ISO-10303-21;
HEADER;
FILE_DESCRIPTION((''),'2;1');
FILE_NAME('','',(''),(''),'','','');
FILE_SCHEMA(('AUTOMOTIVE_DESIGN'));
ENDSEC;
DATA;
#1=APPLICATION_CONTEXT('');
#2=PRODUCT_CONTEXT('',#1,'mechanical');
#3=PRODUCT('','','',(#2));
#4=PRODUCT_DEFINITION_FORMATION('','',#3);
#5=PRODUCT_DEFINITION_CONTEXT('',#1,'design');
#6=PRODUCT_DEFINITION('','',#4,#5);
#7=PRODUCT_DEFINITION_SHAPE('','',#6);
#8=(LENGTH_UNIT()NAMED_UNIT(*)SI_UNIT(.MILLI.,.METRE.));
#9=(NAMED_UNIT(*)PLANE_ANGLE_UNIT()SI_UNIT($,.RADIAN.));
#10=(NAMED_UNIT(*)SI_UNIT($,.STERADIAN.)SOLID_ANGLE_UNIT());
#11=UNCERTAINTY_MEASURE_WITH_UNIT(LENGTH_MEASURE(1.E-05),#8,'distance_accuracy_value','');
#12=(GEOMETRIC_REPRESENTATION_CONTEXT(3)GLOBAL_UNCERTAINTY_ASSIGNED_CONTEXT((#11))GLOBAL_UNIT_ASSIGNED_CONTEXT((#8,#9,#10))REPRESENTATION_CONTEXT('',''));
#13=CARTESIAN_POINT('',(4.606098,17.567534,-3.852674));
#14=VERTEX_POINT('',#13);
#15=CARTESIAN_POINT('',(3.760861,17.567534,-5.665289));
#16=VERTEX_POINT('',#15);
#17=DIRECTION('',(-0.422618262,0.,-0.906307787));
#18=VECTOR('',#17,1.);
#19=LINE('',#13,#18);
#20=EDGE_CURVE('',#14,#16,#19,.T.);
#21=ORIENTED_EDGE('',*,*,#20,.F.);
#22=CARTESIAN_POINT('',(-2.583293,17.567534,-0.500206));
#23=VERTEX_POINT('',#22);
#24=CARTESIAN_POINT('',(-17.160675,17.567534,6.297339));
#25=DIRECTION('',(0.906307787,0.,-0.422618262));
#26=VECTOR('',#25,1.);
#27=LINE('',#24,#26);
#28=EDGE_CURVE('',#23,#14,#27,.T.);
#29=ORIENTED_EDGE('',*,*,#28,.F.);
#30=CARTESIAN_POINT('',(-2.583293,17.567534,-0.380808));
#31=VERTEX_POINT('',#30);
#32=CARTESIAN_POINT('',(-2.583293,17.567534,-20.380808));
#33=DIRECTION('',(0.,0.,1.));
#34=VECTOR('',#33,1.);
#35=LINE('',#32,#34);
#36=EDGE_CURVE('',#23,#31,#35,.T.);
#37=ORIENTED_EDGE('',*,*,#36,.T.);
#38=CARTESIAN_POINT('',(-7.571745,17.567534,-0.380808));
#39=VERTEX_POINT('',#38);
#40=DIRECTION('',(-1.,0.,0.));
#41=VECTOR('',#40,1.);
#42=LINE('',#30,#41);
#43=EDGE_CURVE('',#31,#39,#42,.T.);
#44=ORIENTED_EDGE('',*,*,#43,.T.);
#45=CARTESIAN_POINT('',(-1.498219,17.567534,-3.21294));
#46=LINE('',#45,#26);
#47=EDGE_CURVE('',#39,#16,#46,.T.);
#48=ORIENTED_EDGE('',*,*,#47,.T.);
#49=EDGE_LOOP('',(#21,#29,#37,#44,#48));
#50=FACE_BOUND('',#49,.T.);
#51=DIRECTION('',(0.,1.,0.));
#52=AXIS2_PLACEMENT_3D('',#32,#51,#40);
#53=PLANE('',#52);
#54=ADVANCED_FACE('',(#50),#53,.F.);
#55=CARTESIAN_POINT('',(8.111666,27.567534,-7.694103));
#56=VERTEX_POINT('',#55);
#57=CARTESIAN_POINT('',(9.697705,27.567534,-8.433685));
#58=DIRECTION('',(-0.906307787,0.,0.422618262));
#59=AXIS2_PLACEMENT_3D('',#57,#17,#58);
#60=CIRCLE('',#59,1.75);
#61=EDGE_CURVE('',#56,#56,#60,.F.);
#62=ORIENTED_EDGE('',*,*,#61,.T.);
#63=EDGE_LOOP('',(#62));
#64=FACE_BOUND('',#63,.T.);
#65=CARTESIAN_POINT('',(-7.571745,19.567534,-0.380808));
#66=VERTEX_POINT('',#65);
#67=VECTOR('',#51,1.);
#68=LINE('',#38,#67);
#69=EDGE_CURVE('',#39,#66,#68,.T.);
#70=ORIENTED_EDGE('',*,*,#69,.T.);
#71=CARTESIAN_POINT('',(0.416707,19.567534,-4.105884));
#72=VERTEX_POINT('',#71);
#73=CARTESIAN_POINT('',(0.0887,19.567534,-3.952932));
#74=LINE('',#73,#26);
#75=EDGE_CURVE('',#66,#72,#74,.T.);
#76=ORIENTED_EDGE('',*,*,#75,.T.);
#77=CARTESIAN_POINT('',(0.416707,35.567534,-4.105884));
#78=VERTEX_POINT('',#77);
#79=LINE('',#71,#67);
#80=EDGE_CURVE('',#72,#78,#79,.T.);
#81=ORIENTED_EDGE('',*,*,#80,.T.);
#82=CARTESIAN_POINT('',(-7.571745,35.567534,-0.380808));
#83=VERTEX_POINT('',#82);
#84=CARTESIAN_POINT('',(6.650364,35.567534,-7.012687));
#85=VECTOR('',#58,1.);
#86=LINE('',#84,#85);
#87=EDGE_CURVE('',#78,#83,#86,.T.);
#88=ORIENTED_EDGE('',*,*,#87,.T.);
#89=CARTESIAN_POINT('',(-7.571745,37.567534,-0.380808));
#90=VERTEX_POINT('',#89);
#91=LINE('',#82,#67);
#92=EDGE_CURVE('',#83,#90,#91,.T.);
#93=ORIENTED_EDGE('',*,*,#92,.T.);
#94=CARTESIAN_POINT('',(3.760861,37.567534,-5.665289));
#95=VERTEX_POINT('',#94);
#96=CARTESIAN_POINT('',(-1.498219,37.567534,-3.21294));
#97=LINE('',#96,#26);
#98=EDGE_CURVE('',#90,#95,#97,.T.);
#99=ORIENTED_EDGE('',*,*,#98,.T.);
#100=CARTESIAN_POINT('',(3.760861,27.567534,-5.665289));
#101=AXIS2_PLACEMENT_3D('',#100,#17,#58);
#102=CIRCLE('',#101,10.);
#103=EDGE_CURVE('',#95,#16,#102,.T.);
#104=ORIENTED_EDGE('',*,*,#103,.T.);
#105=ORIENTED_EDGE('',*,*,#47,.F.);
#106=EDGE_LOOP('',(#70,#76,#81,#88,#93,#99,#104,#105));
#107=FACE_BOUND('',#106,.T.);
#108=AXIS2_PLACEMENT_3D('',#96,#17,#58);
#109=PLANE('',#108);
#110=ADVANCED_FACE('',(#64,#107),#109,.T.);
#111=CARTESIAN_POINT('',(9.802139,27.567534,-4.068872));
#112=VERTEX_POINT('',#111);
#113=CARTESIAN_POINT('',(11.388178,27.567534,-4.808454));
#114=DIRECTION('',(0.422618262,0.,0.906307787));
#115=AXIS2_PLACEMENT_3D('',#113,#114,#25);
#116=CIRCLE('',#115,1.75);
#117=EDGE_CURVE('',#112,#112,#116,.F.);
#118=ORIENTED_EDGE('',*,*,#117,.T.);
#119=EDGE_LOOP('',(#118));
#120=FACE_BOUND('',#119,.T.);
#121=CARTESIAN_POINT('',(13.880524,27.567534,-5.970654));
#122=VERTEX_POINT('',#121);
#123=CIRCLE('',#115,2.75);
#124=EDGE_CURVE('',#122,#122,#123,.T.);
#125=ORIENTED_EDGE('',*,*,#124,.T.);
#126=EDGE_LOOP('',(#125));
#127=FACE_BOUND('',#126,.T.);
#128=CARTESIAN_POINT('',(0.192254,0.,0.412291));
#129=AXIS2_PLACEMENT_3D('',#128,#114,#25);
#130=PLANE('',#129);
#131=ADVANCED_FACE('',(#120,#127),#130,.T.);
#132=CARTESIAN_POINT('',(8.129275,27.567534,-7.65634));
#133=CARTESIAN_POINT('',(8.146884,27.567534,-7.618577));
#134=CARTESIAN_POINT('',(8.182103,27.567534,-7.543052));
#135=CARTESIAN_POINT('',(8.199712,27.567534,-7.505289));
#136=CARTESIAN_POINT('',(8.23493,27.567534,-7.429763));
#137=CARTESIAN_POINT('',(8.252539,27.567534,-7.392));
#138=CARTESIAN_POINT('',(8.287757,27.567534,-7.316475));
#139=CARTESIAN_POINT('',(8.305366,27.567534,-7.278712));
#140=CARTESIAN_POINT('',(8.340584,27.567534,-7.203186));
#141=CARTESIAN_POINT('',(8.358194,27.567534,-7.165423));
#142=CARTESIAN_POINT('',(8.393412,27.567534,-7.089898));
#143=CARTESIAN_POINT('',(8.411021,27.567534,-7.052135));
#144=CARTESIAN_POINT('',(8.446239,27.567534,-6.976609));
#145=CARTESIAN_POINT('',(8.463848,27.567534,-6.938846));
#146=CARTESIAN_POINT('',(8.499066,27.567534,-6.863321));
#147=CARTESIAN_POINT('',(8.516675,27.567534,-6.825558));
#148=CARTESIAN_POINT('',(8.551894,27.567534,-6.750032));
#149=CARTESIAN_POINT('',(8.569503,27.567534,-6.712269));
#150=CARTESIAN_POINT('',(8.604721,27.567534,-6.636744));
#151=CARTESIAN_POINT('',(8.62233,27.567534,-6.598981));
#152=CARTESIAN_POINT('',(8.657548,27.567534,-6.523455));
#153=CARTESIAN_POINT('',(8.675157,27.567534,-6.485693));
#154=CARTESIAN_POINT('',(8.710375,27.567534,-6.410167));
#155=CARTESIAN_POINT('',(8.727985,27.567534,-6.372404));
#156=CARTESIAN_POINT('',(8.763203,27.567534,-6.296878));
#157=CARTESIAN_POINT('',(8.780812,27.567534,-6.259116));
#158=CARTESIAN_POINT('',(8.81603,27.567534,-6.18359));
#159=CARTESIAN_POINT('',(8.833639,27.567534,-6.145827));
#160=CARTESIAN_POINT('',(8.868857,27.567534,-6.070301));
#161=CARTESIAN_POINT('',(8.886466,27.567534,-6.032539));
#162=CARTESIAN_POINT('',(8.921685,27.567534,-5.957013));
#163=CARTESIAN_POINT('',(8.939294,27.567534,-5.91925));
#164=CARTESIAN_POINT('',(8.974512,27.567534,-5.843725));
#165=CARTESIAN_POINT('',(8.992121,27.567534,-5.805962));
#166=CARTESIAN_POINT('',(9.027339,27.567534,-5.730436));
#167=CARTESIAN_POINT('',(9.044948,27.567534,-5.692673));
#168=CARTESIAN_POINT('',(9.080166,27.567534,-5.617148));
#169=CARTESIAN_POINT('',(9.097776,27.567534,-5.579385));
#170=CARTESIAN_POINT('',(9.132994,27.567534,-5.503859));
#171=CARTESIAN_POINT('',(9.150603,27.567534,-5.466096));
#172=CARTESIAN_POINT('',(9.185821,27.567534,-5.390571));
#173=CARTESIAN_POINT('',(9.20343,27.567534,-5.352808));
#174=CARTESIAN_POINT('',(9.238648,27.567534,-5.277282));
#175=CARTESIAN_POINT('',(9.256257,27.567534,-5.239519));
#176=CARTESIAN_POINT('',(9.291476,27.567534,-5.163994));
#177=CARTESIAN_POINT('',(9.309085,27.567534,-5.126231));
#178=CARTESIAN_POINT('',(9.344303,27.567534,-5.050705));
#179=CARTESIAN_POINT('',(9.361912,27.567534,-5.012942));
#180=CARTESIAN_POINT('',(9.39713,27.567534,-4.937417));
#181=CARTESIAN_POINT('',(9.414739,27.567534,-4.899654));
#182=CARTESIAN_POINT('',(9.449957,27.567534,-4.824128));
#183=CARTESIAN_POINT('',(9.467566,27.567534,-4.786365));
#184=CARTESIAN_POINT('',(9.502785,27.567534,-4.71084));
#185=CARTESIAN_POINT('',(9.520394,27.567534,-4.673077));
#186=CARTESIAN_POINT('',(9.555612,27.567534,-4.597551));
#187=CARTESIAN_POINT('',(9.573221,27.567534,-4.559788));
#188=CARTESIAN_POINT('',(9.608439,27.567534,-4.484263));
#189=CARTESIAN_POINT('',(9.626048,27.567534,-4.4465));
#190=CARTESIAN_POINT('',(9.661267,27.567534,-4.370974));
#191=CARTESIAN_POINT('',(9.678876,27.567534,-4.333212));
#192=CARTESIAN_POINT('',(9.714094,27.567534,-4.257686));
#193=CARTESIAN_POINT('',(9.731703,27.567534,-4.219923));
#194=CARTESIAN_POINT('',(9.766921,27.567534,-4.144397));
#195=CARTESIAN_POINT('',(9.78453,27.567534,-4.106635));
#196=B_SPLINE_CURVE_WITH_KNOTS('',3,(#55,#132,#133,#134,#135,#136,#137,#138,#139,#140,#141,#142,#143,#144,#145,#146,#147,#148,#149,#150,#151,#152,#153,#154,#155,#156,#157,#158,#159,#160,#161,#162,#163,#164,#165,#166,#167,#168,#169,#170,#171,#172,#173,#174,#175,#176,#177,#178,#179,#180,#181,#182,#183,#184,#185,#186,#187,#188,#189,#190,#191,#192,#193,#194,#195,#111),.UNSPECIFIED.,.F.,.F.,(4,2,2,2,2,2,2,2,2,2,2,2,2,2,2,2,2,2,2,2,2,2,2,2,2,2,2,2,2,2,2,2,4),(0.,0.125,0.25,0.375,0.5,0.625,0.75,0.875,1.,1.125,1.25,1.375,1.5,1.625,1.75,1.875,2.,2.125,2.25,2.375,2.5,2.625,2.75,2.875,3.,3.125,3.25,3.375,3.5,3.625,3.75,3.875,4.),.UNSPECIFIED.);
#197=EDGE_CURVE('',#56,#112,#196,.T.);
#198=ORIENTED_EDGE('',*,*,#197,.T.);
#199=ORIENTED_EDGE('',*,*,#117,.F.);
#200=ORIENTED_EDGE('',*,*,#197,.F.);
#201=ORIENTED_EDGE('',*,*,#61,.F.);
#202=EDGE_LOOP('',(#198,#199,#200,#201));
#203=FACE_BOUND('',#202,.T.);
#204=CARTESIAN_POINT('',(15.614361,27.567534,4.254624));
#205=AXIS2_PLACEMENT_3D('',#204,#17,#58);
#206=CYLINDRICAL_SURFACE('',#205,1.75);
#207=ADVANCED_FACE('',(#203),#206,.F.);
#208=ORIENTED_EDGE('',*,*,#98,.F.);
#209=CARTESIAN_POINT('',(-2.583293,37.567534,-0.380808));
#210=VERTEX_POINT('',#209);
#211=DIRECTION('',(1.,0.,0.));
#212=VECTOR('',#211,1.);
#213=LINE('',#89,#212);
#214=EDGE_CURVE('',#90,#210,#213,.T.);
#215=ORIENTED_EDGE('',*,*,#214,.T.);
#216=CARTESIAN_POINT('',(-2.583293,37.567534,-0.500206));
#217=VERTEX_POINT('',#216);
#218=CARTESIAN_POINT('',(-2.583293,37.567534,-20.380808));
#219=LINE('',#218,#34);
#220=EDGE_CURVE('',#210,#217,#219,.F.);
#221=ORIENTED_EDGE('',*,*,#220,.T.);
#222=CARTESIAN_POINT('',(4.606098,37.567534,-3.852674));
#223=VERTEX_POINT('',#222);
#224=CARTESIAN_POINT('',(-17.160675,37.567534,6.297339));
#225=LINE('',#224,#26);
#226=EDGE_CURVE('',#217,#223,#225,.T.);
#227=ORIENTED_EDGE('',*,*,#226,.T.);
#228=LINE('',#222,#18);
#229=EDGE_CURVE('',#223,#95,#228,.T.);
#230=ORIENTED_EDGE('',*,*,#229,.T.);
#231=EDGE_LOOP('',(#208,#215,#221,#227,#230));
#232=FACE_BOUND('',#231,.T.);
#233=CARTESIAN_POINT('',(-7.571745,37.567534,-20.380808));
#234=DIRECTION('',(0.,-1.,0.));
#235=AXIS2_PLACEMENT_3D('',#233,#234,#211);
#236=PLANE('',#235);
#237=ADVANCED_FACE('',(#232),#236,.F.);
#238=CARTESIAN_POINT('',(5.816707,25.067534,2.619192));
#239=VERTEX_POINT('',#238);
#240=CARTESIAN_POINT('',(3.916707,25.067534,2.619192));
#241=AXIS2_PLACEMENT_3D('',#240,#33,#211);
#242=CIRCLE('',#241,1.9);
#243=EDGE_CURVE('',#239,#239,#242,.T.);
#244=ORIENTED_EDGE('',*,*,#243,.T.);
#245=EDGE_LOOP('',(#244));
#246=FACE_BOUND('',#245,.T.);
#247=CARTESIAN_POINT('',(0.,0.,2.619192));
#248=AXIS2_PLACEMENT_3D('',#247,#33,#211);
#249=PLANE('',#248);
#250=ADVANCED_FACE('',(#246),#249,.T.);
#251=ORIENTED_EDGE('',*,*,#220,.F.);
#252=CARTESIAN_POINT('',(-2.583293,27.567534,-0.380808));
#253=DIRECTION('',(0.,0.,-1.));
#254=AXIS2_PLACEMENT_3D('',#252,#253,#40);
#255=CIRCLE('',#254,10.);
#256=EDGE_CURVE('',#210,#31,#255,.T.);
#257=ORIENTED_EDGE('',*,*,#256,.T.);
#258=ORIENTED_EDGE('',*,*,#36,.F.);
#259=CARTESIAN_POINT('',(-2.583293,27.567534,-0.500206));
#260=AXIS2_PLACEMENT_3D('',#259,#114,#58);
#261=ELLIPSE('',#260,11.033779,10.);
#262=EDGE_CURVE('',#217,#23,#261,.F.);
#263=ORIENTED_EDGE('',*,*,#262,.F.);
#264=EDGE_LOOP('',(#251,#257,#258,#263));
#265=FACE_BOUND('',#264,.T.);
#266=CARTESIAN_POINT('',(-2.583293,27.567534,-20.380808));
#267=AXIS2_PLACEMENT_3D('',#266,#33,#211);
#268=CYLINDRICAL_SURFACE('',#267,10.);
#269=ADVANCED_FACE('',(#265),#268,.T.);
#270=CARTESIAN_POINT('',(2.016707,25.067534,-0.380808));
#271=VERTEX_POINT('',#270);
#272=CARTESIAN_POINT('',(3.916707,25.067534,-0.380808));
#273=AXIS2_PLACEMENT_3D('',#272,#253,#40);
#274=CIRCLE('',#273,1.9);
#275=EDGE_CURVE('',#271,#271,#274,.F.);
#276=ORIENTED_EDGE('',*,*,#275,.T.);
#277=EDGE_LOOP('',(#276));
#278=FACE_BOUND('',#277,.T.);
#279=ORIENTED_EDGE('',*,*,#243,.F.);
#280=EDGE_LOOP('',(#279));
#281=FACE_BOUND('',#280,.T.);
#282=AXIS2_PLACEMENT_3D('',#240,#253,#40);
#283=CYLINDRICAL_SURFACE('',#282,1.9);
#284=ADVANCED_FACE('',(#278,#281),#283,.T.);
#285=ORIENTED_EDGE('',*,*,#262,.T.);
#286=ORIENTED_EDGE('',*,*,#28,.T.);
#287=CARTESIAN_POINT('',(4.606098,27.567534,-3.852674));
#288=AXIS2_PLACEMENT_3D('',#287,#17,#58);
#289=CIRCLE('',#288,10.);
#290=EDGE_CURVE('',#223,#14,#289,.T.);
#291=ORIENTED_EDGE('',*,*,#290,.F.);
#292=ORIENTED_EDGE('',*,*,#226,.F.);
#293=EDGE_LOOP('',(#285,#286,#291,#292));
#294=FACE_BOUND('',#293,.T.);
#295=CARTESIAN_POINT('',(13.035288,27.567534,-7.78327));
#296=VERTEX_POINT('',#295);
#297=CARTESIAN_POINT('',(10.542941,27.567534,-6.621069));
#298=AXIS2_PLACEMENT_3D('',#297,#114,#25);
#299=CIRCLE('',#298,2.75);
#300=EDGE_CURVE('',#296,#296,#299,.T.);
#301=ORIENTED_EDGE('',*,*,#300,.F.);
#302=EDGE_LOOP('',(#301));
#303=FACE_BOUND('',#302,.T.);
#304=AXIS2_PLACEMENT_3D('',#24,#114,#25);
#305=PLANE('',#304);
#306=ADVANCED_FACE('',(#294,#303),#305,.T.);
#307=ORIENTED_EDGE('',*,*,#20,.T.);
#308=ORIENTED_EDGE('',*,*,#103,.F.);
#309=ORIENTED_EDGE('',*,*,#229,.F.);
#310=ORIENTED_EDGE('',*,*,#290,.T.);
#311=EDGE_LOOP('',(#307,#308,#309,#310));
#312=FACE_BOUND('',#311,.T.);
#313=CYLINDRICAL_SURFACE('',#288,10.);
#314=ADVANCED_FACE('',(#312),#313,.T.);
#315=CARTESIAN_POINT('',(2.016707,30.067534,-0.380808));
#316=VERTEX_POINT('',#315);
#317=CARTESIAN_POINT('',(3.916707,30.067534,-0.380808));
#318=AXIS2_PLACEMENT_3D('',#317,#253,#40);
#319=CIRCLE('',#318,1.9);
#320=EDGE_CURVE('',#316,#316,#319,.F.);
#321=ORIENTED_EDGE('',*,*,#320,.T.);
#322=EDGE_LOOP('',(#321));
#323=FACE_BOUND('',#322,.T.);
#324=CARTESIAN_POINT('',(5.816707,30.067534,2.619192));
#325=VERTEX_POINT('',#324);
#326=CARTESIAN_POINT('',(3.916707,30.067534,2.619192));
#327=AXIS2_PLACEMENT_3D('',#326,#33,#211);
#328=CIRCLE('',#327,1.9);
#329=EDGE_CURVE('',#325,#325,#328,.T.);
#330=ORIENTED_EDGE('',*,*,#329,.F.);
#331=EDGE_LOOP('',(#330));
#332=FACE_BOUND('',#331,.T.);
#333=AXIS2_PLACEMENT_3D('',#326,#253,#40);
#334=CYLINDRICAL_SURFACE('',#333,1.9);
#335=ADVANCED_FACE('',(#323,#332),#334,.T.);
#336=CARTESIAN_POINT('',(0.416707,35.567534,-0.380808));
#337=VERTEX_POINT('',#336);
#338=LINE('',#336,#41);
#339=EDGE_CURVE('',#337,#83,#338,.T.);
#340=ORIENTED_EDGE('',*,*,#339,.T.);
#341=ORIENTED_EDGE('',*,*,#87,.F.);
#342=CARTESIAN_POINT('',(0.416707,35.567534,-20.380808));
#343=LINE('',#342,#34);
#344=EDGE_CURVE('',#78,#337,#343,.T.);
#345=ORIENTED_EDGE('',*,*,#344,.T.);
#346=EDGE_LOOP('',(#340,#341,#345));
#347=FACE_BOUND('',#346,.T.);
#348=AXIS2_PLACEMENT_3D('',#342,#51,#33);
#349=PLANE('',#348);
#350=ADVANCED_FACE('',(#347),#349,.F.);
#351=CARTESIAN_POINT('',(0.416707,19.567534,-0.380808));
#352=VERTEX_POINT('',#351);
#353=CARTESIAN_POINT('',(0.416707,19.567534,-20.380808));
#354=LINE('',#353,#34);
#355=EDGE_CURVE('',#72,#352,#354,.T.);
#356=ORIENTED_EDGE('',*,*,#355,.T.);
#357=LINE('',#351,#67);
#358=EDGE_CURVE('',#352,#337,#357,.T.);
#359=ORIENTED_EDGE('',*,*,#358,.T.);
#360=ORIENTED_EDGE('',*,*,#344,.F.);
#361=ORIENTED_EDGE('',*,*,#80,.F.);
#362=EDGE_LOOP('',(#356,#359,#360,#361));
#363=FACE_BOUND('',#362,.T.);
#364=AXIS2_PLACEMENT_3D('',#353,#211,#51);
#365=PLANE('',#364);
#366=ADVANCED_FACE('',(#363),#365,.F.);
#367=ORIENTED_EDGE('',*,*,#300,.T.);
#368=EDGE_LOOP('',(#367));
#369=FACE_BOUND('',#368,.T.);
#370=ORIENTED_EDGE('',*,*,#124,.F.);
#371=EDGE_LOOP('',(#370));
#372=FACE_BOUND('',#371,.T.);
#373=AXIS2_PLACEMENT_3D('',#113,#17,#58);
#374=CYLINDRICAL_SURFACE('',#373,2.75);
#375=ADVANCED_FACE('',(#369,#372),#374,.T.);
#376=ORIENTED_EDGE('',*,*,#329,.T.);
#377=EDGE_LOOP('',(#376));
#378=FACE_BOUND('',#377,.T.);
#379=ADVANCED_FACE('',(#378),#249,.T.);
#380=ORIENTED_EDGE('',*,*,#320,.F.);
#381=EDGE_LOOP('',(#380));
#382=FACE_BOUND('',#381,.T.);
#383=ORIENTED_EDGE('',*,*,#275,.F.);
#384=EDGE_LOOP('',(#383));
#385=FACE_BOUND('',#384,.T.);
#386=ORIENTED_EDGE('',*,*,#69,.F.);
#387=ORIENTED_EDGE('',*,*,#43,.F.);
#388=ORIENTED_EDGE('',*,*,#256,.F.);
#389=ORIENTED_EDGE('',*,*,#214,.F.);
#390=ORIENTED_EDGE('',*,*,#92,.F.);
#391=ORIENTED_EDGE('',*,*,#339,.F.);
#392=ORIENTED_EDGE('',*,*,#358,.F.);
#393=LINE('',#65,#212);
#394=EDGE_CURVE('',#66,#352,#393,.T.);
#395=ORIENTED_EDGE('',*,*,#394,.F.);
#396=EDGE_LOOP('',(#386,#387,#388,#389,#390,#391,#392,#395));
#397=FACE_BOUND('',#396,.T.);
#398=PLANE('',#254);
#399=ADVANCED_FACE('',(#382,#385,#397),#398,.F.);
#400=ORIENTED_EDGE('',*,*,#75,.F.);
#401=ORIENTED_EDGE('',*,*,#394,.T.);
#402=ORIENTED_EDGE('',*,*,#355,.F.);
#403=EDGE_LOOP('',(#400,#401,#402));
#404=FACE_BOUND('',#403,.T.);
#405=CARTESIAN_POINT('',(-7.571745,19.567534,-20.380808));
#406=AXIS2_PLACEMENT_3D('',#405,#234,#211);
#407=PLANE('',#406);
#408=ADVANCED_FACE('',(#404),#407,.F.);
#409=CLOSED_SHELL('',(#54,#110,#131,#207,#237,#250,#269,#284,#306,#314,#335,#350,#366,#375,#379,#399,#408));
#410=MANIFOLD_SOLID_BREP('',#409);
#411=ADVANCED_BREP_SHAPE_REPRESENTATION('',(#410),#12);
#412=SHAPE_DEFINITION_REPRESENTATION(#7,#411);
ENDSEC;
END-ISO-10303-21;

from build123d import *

# Parameters (mm, degrees)
BOSS_EXTRUDE1_DEPTH     = 20
CUT_EXTRUDE1_START      = -20
CUT_EXTRUDE1_DEPTH      = 20
SKETCH4_R               = 1.9
BOSS_EXTRUDE2_DEPTH     = 3
BOSS_EXTRUDE3_DEPTH     = 2
INTERSECT3_START        = -3.545087111
INTERSECT3_DEPTH        = 2
CUT_EXTRUDE3_DEPTH      = 12
CUT_EXTRUDE3_DEPTH_BACK = 42.091890171
SKETCH9_R               = 1.75
BOSS_EXTRUDE4_START     = 2
SKETCH10_R              = 2.75
SKETCH10_R_2            = 1.75
BOSS_EXTRUDE4_DEPTH     = 2


with BuildPart() as part:
    # Sketch1 → Boss-Extrude1 (new body)
    with BuildSketch(Plane(origin=(0, 0, -0.380808332), x_dir=(-1, 0, 0), z_dir=(0, 0, -1))):
        with BuildLine():
            Line((7.571744633, 37.567534319), (2.583293076, 37.567534319))
            ThreePointArc((2.583293076, 37.567534319), (-7.416706924, 27.567534319), (2.583293076, 17.567534319))
            Line((2.583293076, 17.567534319), (7.571744633, 17.567534319))
            Line((7.571744633, 17.567534319), (7.571744633, 19.567534319))
            Line((7.571744633, 19.567534319), (-0.416706924, 19.567534319))
            Line((-0.416706924, 19.567534319), (-0.416706924, 35.567534319))
            Line((-0.416706924, 35.567534319), (7.571744633, 35.567534319))
            Line((7.571744633, 35.567534319), (7.571744633, 37.567534319))
        make_face()
    extrude(amount=BOSS_EXTRUDE1_DEPTH)

    # Cut-Extrude1: read off the stored shape, not the designer's step
    # Cut-Extrude1 outline → Cut-Extrude1 (cut)
    with BuildSketch(Plane.XZ.offset(-17.567534319).offset(CUT_EXTRUDE1_START)):
        Polygon((-7.571744633, -0.380808332), (-7.571744633, -20.380808332), (7.416706924, -20.380808332), (7.416706924, -7.370038076), align=None)
    extrude(amount=CUT_EXTRUDE1_DEPTH, mode=Mode.SUBTRACT)

    # Sketch4 → Boss-Extrude2 (add)
    with BuildSketch(Plane.XY.offset(-0.380808332)):
        with Locations(Location((3.916706924, 30.067534319, 0), (0, 0, 180))):
            Circle(SKETCH4_R)
        with Locations(Location((3.916706924, 25.067534319, 0), (0, 0, 180))):
            Circle(SKETCH4_R)
    extrude(amount=BOSS_EXTRUDE2_DEPTH)



with BuildPart() as body_2:
    # Sketch5 → Boss-Extrude3 (new body)
    with BuildSketch(Plane(origin=(-1.498218553, 0, -3.212940055), x_dir=(-0.9063077870366496, 0, 0.42261826174070033), z_dir=(-0.4226182617407003, 0, -0.9063077870366495))):
        with BuildLine():
            Line((-5.80275273, 35.29745693), (-5.80275273, 37.567534319))
            ThreePointArc((-5.80275273, 37.567534319), (-15.80275273, 27.567534319), (-5.80275273, 17.567534319))
            Line((-5.80275273, 17.567534319), (-5.80275273, 19.837611709))
            add(Edge.make_bspline(
                [(-5.80275273, 35.29745693), (-9.83653192, 32.297006625), (-9.83653192, 27.567534319), (-9.83653192, 22.838062014), (-5.80275273, 19.837611709)],
                knots=[2.263071394, 2.263071394, 2.263071394, 3.141592654, 3.141592654, 4.020113913, 4.020113913, 4.020113913], degree=2, weights=[0.855612192, 0.836189508, 1, 0.836189508, 0.855612192]))
        make_face()
        with BuildLine():
            Line((-5.80275273, 19.837611709), (-5.80275273, 17.567534319))
            Line((-5.80275273, 17.567534319), (1.19724727, 17.567534319))
            add(Edge.make_bspline(
                [(-5.80275273, 19.837611709), (-2.750880511, 17.567534319), (1.19724727, 17.567534319)],
                knots=[4.020113913, 4.020113913, 4.020113913, 4.71238898, 4.71238898, 4.71238898], degree=2, weights=[0.855612192, 0.870917273, 1]))
        make_face()
        with BuildLine():
            Line((1.19724727, 37.567534319), (-5.80275273, 37.567534319))
            Line((-5.80275273, 37.567534319), (-5.80275273, 35.29745693))
            add(Edge.make_bspline(
                [(1.19724727, 37.567534319), (-2.750880511, 37.567534319), (-5.80275273, 35.29745693)],
                knots=[1.570796327, 1.570796327, 1.570796327, 2.263071394, 2.263071394, 2.263071394], degree=2, weights=[1, 0.870917273, 0.855612192]))
        make_face()
    extrude(amount=-BOSS_EXTRUDE3_DEPTH)


with BuildPart() as part_1:
    add(part.part)

    add(body_2.part)  # Intersect3 merges body 2
    # Intersect3: read off the stored shape, not the designer's step
    # Intersect3 outline → Intersect3 (add)
    with BuildSketch(Plane(origin=(0, 0, 0), x_dir=(0.9063077870366488, 0, -0.42261826174070194), z_dir=(0.4226182617407019, 0, 0.9063077870366488)).offset(INTERSECT3_START)):
        with BuildLine():
            ThreePointArc((5.80275273, 17.567534319), (15.80275273, 27.567534319), (5.80275273, 37.567534319))
            Line((5.80275273, 37.567534319), (-2.129862586, 37.567534319))
            add(Edge.make_bspline(
                [(-2.129862586, 17.567534319), (8.903916604, 17.567534319), (8.903916604, 27.567534319), (8.903916604, 37.567534319), (-2.129862586, 37.567534319)],
                knots=[1.570796327, 1.570796327, 1.570796327, 3.141592654, 3.141592654, 4.71238898, 4.71238898, 4.71238898], degree=2, weights=[1, 0.707106781, 1, 0.707106781, 1]))
            Line((-2.129862586, 17.567534319), (5.80275273, 17.567534319))
        make_face()
    extrude(amount=INTERSECT3_DEPTH)

    # Sketch9 → Cut-Extrude3 (cut, two sides: drawn at the far end of the back side and taken through both)
    with BuildSketch(Plane(origin=(-0.652982029, 0, -1.400324481), x_dir=(0.9063077870366496, 0, -0.4226182617407002), z_dir=(0.4226182617407003, 0, 0.9063077870366497)).offset(-CUT_EXTRUDE3_DEPTH_BACK)):
        with Locations(Location((12.353334667, 27.567534319, 0), (0, 0, 180))):
            Circle(SKETCH9_R)
    extrude(amount=CUT_EXTRUDE3_DEPTH + CUT_EXTRUDE3_DEPTH_BACK, mode=Mode.SUBTRACT)

    # Sketch10 → Boss-Extrude4 (add)
    with BuildSketch(Plane(origin=(-0.652982029, 0, -1.400324481), x_dir=(0.9063077870366488, 0, -0.4226182617407019), z_dir=(0.4226182617407019, 0, 0.9063077870366488)).offset(BOSS_EXTRUDE4_START)):
        with Locations((12.353334667, 27.567534319)):
            Circle(SKETCH10_R)
        with Locations(Location((12.353334667, 27.567534319, 0), (0, 0, 180))):
            Circle(SKETCH10_R_2, mode=Mode.SUBTRACT)
    extrude(amount=-BOSS_EXTRUDE4_DEPTH)


solid = part_1.part
